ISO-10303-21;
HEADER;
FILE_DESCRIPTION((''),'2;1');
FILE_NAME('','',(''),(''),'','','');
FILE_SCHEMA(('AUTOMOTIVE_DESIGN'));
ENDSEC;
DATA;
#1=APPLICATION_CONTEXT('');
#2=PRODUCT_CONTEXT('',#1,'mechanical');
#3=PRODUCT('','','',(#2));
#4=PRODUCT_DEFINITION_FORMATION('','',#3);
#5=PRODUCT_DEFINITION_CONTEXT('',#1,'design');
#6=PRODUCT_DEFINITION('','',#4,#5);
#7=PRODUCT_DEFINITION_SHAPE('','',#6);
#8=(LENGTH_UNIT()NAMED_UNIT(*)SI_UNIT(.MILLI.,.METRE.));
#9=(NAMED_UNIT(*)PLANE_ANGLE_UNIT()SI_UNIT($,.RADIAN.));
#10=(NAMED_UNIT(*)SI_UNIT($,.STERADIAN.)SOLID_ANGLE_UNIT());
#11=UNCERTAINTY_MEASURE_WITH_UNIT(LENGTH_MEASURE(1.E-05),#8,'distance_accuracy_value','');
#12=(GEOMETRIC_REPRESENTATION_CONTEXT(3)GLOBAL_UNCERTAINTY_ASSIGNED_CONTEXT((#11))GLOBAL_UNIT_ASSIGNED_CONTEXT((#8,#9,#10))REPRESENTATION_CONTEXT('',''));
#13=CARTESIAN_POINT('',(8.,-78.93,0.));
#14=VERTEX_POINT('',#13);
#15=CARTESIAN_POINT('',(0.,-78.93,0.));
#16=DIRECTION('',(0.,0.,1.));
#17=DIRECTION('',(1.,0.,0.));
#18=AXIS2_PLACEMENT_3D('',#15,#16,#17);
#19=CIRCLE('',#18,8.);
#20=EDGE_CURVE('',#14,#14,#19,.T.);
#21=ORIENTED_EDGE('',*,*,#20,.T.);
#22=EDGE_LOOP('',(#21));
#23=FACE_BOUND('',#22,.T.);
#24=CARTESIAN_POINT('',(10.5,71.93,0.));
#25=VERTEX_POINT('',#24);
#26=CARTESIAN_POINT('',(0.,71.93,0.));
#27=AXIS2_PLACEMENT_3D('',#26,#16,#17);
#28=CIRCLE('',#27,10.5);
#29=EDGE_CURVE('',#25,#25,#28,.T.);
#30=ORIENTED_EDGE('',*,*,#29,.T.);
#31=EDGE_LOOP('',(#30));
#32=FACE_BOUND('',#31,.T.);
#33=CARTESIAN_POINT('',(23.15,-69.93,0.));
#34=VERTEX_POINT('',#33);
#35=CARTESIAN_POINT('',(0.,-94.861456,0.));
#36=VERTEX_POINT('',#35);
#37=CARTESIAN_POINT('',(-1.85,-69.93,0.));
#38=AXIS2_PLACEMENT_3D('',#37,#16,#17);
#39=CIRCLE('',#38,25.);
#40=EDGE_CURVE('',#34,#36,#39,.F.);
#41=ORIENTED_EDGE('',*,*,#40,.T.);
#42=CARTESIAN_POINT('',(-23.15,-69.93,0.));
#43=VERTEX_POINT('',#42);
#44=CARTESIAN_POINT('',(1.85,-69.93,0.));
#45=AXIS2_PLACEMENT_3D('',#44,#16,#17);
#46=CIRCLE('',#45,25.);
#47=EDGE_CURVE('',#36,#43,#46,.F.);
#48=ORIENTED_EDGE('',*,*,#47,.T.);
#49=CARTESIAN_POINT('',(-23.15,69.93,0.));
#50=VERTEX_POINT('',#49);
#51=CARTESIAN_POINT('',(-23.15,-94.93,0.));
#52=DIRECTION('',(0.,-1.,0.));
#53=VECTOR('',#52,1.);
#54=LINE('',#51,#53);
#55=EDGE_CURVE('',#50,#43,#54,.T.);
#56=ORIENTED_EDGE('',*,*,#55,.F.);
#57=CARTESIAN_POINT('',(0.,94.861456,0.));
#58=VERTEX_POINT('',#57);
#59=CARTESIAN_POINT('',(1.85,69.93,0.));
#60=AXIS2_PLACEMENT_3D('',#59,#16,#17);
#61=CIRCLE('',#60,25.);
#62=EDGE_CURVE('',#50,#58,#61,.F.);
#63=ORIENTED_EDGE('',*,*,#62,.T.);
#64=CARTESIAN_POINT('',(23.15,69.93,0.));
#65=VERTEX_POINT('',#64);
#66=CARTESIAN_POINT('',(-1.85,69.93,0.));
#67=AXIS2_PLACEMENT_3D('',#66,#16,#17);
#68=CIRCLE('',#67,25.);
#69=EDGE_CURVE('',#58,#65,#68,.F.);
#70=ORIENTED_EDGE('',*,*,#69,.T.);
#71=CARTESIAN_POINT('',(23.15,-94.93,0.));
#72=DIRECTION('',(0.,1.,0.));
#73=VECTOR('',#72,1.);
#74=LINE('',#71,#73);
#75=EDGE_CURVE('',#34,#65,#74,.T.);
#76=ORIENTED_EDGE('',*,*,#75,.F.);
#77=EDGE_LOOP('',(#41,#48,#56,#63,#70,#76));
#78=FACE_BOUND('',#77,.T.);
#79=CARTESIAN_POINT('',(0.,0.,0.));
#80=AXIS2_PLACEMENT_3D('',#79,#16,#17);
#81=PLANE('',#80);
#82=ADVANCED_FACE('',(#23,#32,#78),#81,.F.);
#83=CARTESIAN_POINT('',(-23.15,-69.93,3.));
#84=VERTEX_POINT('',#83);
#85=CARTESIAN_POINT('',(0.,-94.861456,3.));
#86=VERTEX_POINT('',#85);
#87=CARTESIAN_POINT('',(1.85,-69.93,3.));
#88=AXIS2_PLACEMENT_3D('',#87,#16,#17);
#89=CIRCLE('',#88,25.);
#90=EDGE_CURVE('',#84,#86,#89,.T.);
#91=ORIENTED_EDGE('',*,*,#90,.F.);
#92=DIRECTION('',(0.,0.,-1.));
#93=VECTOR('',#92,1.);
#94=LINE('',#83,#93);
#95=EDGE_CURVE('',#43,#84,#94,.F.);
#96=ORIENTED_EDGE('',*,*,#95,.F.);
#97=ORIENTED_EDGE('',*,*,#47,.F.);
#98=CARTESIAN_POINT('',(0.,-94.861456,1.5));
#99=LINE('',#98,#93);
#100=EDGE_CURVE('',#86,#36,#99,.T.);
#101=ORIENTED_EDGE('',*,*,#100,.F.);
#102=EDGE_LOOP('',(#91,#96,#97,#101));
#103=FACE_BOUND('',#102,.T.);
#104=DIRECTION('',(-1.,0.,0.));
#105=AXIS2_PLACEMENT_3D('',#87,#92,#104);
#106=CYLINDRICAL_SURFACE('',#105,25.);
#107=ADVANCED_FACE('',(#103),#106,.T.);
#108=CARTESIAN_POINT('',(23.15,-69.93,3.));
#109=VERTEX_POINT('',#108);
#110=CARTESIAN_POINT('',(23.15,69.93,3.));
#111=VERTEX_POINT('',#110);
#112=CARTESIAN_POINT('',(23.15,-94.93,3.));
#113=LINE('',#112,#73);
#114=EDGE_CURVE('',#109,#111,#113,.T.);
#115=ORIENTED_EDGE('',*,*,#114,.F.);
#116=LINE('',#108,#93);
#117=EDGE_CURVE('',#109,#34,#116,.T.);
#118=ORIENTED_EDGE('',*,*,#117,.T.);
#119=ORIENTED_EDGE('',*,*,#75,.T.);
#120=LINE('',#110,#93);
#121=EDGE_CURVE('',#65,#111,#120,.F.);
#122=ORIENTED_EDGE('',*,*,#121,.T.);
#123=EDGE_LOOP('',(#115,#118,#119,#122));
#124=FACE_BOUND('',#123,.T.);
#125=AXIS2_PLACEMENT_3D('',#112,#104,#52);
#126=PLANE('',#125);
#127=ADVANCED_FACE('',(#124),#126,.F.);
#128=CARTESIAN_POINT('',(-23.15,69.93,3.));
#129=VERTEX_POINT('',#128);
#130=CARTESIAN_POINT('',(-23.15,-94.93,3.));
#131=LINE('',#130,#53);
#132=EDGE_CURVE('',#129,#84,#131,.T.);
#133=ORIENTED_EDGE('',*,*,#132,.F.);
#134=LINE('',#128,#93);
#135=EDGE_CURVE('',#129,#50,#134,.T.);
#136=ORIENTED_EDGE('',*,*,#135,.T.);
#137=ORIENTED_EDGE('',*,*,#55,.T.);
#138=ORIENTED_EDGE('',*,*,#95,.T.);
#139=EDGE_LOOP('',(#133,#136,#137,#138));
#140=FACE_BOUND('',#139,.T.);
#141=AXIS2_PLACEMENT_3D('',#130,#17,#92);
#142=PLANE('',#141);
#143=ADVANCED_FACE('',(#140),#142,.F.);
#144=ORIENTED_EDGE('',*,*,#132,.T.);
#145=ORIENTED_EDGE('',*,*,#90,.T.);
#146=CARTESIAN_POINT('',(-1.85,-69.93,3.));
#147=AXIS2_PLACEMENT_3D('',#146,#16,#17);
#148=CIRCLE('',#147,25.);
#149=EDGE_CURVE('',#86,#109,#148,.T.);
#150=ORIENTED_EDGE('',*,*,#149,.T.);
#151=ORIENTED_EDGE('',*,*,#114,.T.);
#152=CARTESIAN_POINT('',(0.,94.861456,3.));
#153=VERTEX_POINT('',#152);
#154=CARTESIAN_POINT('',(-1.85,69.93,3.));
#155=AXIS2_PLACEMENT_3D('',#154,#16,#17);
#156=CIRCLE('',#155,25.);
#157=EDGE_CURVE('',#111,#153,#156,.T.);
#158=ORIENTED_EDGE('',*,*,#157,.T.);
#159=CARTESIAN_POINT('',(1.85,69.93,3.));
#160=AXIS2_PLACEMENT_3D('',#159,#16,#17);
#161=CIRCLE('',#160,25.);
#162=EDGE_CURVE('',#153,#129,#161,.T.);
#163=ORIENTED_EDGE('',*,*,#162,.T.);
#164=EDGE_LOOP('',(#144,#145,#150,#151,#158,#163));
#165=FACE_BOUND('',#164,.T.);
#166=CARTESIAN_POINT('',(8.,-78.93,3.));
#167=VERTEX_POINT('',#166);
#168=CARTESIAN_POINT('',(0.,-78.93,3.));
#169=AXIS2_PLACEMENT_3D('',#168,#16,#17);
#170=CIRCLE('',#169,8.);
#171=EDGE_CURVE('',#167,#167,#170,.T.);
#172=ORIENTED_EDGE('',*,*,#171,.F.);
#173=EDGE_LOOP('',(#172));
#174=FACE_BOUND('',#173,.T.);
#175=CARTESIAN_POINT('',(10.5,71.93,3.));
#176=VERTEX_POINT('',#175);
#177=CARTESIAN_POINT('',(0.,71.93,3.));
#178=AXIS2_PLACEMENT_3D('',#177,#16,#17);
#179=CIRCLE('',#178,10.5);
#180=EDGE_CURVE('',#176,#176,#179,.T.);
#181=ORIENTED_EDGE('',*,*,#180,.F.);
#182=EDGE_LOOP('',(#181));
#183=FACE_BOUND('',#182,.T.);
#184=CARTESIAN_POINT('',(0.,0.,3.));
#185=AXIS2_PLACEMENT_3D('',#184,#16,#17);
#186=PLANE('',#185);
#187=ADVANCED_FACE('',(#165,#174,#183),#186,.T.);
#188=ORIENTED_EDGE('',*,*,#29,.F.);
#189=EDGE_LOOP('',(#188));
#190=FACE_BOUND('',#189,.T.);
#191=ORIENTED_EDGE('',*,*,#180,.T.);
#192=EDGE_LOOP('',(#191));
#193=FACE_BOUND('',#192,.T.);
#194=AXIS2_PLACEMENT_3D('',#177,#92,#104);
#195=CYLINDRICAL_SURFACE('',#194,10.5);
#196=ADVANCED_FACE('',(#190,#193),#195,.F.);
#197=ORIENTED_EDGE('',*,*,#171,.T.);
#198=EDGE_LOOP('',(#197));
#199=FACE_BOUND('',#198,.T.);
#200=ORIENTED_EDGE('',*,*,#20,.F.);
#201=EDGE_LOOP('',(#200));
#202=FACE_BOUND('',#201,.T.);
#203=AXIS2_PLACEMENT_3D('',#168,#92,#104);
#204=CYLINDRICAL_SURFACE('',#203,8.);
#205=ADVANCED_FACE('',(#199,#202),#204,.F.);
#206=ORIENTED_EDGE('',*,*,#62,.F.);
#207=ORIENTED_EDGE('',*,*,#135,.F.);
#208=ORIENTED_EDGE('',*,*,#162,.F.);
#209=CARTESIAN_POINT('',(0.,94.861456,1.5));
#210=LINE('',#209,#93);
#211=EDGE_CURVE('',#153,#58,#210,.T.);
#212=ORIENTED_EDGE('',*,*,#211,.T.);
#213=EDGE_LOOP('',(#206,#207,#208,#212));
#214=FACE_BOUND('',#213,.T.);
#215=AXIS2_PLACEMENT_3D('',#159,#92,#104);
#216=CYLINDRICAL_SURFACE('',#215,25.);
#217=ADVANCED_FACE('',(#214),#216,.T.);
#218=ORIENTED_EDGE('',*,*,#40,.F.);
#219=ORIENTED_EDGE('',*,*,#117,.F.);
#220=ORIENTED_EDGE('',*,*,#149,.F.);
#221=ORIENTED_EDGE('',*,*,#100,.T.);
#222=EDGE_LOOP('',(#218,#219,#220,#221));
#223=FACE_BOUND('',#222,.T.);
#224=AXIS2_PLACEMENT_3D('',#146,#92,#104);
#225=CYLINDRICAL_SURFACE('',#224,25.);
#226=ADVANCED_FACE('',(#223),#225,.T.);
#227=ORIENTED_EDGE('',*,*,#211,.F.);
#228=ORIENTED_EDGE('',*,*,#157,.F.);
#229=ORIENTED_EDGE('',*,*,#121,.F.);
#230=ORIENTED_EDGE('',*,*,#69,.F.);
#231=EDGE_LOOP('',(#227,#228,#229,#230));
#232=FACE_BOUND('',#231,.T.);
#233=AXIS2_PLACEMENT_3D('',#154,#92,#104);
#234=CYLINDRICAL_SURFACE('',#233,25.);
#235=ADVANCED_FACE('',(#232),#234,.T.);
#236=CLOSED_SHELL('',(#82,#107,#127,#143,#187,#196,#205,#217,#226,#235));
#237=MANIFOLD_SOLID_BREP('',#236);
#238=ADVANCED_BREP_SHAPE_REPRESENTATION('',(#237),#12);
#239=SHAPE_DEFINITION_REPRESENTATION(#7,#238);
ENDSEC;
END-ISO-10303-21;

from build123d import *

# Parameters (mm, degrees)
SKETCH1_W           = 46.3
SKETCH1_H           = 189.86
SKETCH1_R           = 10.5
SKETCH1_R_2         = 8
BOSS_EXTRUDE1_DEPTH = 3
FILLET1_R           = 25


with BuildPart() as part:
    # Sketch1 → Boss-Extrude1 (new body)
    with BuildSketch(Plane.XY):
        Rectangle(SKETCH1_W, SKETCH1_H)
        with Locations((0, 71.93)):
            Circle(SKETCH1_R, mode=Mode.SUBTRACT)
        with Locations((0, -78.93)):
            Circle(SKETCH1_R_2, mode=Mode.SUBTRACT)
    extrude(amount=BOSS_EXTRUDE1_DEPTH)

    # Fillet1
    # the kernel refuses this fillet: 25 mm, written as the material it takes off along each edge
    with BuildSketch(Plane(origin=(23.15, -94.93, -62.5), x_dir=(-1, 0, 0), z_dir=(0, 0, 1))) as fillet1_piece_1:
        with BuildLine():
            CenterArc((FILLET1_R, -FILLET1_R), FILLET1_R, 90, 90)
            Line((0, -FILLET1_R), (0, 0))
            Line((0, 0), (FILLET1_R, 0))
        make_face()
    extrude(amount=128, mode=Mode.SUBTRACT)
    with BuildSketch(Plane(origin=(-23.15, -94.93, -62.5), x_dir=(1, 0, 0), z_dir=(0, 0, 1)), Plane(origin=(-23.15, 94.93, -62.5), x_dir=(0, -1, 0), z_dir=(0, 0, 1)), Plane(origin=(23.15, 94.93, -62.5), x_dir=(-1, 0, 0), z_dir=(0, 0, 1))) as fillet1_piece_2:
        with BuildLine():
            CenterArc((FILLET1_R, FILLET1_R), FILLET1_R, 180, 90)
            Line((0, FILLET1_R), (0, 0))
            Line((0, 0), (FILLET1_R, 0))
        make_face()
    extrude(amount=128, mode=Mode.SUBTRACT)


solid = part.part
